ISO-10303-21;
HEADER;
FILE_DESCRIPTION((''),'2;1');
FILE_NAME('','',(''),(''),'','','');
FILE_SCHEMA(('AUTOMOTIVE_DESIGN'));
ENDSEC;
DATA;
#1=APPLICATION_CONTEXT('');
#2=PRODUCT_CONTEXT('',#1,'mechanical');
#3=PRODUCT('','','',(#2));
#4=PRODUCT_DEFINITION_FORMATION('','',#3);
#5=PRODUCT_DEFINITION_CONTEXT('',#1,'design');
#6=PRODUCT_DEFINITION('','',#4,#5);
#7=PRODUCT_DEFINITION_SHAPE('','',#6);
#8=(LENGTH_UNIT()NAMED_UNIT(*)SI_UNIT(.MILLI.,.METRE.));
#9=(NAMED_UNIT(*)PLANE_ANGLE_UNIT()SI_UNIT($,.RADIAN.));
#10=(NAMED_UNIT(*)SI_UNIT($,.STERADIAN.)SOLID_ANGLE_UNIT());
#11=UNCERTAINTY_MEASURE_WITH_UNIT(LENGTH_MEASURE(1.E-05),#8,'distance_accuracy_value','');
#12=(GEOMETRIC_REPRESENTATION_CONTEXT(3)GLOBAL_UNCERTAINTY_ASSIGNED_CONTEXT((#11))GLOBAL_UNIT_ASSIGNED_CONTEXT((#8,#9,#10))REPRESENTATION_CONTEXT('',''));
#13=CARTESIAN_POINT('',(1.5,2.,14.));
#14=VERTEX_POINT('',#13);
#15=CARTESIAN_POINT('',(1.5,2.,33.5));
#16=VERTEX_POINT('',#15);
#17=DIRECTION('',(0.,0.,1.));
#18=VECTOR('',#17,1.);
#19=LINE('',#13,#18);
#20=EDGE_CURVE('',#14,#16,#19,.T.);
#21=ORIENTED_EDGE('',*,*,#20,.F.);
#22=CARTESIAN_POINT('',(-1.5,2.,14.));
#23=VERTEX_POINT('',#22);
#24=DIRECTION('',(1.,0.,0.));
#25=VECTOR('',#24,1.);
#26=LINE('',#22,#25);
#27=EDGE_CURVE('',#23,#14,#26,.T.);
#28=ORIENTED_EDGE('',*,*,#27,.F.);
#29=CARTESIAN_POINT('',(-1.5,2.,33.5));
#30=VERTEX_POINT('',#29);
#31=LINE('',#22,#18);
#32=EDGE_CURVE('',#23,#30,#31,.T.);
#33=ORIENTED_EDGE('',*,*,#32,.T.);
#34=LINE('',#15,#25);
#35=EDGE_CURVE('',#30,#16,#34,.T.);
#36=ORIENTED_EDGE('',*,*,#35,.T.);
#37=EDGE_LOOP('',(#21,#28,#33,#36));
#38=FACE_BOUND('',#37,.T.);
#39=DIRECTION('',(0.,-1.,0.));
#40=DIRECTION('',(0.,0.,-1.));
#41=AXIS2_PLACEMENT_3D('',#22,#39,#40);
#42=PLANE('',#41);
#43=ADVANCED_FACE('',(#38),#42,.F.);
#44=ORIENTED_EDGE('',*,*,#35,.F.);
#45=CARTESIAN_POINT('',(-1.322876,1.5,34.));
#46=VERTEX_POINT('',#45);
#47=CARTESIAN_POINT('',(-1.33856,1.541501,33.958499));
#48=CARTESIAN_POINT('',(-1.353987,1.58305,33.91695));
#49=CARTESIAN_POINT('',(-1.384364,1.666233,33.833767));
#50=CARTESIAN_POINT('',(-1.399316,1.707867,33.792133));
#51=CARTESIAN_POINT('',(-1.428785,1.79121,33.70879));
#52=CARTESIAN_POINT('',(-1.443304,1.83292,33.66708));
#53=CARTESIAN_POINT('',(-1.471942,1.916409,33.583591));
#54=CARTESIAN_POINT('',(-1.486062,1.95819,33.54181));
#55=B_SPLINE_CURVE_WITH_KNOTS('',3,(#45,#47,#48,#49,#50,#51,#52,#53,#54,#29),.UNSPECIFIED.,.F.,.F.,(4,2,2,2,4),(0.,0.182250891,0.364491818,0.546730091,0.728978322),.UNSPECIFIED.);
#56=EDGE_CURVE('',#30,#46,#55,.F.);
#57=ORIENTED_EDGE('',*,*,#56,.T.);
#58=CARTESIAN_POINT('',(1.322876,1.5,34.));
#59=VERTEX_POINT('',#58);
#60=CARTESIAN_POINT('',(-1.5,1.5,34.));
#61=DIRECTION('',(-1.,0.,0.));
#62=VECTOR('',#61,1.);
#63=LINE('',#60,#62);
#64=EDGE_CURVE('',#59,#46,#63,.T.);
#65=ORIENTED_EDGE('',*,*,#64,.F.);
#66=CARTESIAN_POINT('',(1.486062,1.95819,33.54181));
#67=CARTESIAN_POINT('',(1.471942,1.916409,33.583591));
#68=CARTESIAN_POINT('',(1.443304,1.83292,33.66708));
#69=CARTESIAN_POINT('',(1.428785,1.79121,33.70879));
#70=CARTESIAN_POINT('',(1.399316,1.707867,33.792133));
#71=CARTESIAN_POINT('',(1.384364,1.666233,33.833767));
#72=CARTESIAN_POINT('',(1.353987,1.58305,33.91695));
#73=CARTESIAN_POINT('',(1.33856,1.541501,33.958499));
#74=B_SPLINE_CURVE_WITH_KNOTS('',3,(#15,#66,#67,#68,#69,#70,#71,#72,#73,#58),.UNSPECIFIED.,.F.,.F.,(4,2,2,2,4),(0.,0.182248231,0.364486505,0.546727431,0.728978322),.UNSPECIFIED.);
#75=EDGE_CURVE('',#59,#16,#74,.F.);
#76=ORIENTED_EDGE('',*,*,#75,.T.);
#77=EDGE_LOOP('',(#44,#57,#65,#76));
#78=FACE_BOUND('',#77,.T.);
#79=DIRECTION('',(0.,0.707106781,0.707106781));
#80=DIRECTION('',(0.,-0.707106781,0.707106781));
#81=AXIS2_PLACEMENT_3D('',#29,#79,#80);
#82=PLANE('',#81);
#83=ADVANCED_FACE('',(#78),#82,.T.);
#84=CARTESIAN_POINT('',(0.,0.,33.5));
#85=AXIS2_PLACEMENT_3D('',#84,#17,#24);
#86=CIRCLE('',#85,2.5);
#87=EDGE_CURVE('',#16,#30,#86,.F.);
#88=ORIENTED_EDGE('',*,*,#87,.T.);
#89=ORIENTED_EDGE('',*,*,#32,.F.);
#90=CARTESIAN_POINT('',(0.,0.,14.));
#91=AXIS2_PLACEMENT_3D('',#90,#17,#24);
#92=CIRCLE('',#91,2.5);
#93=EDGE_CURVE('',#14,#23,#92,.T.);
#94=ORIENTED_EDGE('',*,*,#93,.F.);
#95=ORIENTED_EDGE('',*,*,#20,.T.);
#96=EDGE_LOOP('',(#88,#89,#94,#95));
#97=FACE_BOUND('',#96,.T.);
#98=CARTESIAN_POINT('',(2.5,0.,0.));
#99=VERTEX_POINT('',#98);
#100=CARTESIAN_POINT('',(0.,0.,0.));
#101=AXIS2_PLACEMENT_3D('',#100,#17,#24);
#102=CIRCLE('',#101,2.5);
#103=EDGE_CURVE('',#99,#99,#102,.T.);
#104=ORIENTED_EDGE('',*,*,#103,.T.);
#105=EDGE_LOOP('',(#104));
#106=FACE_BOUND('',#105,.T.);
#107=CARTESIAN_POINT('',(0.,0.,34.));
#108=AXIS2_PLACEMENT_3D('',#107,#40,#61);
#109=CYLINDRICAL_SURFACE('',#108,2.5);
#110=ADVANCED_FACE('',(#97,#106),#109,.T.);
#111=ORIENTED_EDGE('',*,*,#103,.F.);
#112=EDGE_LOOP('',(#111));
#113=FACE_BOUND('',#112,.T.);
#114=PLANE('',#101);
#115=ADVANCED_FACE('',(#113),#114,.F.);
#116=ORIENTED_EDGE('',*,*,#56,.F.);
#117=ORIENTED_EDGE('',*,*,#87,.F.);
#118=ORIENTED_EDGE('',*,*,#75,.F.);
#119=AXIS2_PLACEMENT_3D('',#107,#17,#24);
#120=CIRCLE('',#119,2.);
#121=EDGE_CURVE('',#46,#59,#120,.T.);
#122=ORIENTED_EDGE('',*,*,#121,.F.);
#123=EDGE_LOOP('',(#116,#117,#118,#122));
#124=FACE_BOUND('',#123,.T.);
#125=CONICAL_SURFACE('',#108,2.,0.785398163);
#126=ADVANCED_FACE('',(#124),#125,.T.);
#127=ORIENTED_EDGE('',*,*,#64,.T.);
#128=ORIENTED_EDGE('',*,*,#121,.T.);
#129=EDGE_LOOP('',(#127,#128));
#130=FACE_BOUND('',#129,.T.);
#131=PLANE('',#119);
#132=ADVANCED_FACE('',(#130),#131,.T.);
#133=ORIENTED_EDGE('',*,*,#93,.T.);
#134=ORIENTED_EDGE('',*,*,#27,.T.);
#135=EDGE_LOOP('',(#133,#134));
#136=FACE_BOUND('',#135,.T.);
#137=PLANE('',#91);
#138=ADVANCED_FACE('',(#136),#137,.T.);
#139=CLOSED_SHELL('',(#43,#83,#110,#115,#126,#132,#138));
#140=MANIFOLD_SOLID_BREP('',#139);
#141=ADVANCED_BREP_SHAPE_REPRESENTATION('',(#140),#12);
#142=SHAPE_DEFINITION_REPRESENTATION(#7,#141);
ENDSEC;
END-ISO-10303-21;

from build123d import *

# Parameters (mm, degrees)
SKETCH_1_R          = 2.5
EXTRUDE_5_DEPTH     = 34
CUT_EXTRUDE_START   = -20
CUT_EXTRUDE_2_DEPTH = 20
CHAMFER_2_SIZE      = 0.5


with BuildPart() as part:
    # 草图1 → 凸台-拉伸5 (new body)
    with BuildSketch(Plane.XY):
        Circle(SKETCH_1_R)
    extrude(amount=EXTRUDE_5_DEPTH)

    # 草图4 → 切除-拉伸2 (cut)
    with BuildSketch(Plane.XY.offset(34).offset(CUT_EXTRUDE_START)):
        with BuildLine():
            Line((-1.5, 2), (1.5, 2))
            ThreePointArc((1.5, 2), (0, 2.5), (-1.5, 2))
        make_face()
    extrude(amount=CUT_EXTRUDE_2_DEPTH, mode=Mode.SUBTRACT)

    # 倒角2
    chamfer_2_edges = [part.edges().sort_by_distance(p)[0] for p in [
        (-1.118033989, -2.236067977, 34),
        (0, 2, 34),
    ]]
    chamfer(chamfer_2_edges, length=CHAMFER_2_SIZE - 0.0001)  # a hair under: the kernel refuses the full size


solid = part.part
